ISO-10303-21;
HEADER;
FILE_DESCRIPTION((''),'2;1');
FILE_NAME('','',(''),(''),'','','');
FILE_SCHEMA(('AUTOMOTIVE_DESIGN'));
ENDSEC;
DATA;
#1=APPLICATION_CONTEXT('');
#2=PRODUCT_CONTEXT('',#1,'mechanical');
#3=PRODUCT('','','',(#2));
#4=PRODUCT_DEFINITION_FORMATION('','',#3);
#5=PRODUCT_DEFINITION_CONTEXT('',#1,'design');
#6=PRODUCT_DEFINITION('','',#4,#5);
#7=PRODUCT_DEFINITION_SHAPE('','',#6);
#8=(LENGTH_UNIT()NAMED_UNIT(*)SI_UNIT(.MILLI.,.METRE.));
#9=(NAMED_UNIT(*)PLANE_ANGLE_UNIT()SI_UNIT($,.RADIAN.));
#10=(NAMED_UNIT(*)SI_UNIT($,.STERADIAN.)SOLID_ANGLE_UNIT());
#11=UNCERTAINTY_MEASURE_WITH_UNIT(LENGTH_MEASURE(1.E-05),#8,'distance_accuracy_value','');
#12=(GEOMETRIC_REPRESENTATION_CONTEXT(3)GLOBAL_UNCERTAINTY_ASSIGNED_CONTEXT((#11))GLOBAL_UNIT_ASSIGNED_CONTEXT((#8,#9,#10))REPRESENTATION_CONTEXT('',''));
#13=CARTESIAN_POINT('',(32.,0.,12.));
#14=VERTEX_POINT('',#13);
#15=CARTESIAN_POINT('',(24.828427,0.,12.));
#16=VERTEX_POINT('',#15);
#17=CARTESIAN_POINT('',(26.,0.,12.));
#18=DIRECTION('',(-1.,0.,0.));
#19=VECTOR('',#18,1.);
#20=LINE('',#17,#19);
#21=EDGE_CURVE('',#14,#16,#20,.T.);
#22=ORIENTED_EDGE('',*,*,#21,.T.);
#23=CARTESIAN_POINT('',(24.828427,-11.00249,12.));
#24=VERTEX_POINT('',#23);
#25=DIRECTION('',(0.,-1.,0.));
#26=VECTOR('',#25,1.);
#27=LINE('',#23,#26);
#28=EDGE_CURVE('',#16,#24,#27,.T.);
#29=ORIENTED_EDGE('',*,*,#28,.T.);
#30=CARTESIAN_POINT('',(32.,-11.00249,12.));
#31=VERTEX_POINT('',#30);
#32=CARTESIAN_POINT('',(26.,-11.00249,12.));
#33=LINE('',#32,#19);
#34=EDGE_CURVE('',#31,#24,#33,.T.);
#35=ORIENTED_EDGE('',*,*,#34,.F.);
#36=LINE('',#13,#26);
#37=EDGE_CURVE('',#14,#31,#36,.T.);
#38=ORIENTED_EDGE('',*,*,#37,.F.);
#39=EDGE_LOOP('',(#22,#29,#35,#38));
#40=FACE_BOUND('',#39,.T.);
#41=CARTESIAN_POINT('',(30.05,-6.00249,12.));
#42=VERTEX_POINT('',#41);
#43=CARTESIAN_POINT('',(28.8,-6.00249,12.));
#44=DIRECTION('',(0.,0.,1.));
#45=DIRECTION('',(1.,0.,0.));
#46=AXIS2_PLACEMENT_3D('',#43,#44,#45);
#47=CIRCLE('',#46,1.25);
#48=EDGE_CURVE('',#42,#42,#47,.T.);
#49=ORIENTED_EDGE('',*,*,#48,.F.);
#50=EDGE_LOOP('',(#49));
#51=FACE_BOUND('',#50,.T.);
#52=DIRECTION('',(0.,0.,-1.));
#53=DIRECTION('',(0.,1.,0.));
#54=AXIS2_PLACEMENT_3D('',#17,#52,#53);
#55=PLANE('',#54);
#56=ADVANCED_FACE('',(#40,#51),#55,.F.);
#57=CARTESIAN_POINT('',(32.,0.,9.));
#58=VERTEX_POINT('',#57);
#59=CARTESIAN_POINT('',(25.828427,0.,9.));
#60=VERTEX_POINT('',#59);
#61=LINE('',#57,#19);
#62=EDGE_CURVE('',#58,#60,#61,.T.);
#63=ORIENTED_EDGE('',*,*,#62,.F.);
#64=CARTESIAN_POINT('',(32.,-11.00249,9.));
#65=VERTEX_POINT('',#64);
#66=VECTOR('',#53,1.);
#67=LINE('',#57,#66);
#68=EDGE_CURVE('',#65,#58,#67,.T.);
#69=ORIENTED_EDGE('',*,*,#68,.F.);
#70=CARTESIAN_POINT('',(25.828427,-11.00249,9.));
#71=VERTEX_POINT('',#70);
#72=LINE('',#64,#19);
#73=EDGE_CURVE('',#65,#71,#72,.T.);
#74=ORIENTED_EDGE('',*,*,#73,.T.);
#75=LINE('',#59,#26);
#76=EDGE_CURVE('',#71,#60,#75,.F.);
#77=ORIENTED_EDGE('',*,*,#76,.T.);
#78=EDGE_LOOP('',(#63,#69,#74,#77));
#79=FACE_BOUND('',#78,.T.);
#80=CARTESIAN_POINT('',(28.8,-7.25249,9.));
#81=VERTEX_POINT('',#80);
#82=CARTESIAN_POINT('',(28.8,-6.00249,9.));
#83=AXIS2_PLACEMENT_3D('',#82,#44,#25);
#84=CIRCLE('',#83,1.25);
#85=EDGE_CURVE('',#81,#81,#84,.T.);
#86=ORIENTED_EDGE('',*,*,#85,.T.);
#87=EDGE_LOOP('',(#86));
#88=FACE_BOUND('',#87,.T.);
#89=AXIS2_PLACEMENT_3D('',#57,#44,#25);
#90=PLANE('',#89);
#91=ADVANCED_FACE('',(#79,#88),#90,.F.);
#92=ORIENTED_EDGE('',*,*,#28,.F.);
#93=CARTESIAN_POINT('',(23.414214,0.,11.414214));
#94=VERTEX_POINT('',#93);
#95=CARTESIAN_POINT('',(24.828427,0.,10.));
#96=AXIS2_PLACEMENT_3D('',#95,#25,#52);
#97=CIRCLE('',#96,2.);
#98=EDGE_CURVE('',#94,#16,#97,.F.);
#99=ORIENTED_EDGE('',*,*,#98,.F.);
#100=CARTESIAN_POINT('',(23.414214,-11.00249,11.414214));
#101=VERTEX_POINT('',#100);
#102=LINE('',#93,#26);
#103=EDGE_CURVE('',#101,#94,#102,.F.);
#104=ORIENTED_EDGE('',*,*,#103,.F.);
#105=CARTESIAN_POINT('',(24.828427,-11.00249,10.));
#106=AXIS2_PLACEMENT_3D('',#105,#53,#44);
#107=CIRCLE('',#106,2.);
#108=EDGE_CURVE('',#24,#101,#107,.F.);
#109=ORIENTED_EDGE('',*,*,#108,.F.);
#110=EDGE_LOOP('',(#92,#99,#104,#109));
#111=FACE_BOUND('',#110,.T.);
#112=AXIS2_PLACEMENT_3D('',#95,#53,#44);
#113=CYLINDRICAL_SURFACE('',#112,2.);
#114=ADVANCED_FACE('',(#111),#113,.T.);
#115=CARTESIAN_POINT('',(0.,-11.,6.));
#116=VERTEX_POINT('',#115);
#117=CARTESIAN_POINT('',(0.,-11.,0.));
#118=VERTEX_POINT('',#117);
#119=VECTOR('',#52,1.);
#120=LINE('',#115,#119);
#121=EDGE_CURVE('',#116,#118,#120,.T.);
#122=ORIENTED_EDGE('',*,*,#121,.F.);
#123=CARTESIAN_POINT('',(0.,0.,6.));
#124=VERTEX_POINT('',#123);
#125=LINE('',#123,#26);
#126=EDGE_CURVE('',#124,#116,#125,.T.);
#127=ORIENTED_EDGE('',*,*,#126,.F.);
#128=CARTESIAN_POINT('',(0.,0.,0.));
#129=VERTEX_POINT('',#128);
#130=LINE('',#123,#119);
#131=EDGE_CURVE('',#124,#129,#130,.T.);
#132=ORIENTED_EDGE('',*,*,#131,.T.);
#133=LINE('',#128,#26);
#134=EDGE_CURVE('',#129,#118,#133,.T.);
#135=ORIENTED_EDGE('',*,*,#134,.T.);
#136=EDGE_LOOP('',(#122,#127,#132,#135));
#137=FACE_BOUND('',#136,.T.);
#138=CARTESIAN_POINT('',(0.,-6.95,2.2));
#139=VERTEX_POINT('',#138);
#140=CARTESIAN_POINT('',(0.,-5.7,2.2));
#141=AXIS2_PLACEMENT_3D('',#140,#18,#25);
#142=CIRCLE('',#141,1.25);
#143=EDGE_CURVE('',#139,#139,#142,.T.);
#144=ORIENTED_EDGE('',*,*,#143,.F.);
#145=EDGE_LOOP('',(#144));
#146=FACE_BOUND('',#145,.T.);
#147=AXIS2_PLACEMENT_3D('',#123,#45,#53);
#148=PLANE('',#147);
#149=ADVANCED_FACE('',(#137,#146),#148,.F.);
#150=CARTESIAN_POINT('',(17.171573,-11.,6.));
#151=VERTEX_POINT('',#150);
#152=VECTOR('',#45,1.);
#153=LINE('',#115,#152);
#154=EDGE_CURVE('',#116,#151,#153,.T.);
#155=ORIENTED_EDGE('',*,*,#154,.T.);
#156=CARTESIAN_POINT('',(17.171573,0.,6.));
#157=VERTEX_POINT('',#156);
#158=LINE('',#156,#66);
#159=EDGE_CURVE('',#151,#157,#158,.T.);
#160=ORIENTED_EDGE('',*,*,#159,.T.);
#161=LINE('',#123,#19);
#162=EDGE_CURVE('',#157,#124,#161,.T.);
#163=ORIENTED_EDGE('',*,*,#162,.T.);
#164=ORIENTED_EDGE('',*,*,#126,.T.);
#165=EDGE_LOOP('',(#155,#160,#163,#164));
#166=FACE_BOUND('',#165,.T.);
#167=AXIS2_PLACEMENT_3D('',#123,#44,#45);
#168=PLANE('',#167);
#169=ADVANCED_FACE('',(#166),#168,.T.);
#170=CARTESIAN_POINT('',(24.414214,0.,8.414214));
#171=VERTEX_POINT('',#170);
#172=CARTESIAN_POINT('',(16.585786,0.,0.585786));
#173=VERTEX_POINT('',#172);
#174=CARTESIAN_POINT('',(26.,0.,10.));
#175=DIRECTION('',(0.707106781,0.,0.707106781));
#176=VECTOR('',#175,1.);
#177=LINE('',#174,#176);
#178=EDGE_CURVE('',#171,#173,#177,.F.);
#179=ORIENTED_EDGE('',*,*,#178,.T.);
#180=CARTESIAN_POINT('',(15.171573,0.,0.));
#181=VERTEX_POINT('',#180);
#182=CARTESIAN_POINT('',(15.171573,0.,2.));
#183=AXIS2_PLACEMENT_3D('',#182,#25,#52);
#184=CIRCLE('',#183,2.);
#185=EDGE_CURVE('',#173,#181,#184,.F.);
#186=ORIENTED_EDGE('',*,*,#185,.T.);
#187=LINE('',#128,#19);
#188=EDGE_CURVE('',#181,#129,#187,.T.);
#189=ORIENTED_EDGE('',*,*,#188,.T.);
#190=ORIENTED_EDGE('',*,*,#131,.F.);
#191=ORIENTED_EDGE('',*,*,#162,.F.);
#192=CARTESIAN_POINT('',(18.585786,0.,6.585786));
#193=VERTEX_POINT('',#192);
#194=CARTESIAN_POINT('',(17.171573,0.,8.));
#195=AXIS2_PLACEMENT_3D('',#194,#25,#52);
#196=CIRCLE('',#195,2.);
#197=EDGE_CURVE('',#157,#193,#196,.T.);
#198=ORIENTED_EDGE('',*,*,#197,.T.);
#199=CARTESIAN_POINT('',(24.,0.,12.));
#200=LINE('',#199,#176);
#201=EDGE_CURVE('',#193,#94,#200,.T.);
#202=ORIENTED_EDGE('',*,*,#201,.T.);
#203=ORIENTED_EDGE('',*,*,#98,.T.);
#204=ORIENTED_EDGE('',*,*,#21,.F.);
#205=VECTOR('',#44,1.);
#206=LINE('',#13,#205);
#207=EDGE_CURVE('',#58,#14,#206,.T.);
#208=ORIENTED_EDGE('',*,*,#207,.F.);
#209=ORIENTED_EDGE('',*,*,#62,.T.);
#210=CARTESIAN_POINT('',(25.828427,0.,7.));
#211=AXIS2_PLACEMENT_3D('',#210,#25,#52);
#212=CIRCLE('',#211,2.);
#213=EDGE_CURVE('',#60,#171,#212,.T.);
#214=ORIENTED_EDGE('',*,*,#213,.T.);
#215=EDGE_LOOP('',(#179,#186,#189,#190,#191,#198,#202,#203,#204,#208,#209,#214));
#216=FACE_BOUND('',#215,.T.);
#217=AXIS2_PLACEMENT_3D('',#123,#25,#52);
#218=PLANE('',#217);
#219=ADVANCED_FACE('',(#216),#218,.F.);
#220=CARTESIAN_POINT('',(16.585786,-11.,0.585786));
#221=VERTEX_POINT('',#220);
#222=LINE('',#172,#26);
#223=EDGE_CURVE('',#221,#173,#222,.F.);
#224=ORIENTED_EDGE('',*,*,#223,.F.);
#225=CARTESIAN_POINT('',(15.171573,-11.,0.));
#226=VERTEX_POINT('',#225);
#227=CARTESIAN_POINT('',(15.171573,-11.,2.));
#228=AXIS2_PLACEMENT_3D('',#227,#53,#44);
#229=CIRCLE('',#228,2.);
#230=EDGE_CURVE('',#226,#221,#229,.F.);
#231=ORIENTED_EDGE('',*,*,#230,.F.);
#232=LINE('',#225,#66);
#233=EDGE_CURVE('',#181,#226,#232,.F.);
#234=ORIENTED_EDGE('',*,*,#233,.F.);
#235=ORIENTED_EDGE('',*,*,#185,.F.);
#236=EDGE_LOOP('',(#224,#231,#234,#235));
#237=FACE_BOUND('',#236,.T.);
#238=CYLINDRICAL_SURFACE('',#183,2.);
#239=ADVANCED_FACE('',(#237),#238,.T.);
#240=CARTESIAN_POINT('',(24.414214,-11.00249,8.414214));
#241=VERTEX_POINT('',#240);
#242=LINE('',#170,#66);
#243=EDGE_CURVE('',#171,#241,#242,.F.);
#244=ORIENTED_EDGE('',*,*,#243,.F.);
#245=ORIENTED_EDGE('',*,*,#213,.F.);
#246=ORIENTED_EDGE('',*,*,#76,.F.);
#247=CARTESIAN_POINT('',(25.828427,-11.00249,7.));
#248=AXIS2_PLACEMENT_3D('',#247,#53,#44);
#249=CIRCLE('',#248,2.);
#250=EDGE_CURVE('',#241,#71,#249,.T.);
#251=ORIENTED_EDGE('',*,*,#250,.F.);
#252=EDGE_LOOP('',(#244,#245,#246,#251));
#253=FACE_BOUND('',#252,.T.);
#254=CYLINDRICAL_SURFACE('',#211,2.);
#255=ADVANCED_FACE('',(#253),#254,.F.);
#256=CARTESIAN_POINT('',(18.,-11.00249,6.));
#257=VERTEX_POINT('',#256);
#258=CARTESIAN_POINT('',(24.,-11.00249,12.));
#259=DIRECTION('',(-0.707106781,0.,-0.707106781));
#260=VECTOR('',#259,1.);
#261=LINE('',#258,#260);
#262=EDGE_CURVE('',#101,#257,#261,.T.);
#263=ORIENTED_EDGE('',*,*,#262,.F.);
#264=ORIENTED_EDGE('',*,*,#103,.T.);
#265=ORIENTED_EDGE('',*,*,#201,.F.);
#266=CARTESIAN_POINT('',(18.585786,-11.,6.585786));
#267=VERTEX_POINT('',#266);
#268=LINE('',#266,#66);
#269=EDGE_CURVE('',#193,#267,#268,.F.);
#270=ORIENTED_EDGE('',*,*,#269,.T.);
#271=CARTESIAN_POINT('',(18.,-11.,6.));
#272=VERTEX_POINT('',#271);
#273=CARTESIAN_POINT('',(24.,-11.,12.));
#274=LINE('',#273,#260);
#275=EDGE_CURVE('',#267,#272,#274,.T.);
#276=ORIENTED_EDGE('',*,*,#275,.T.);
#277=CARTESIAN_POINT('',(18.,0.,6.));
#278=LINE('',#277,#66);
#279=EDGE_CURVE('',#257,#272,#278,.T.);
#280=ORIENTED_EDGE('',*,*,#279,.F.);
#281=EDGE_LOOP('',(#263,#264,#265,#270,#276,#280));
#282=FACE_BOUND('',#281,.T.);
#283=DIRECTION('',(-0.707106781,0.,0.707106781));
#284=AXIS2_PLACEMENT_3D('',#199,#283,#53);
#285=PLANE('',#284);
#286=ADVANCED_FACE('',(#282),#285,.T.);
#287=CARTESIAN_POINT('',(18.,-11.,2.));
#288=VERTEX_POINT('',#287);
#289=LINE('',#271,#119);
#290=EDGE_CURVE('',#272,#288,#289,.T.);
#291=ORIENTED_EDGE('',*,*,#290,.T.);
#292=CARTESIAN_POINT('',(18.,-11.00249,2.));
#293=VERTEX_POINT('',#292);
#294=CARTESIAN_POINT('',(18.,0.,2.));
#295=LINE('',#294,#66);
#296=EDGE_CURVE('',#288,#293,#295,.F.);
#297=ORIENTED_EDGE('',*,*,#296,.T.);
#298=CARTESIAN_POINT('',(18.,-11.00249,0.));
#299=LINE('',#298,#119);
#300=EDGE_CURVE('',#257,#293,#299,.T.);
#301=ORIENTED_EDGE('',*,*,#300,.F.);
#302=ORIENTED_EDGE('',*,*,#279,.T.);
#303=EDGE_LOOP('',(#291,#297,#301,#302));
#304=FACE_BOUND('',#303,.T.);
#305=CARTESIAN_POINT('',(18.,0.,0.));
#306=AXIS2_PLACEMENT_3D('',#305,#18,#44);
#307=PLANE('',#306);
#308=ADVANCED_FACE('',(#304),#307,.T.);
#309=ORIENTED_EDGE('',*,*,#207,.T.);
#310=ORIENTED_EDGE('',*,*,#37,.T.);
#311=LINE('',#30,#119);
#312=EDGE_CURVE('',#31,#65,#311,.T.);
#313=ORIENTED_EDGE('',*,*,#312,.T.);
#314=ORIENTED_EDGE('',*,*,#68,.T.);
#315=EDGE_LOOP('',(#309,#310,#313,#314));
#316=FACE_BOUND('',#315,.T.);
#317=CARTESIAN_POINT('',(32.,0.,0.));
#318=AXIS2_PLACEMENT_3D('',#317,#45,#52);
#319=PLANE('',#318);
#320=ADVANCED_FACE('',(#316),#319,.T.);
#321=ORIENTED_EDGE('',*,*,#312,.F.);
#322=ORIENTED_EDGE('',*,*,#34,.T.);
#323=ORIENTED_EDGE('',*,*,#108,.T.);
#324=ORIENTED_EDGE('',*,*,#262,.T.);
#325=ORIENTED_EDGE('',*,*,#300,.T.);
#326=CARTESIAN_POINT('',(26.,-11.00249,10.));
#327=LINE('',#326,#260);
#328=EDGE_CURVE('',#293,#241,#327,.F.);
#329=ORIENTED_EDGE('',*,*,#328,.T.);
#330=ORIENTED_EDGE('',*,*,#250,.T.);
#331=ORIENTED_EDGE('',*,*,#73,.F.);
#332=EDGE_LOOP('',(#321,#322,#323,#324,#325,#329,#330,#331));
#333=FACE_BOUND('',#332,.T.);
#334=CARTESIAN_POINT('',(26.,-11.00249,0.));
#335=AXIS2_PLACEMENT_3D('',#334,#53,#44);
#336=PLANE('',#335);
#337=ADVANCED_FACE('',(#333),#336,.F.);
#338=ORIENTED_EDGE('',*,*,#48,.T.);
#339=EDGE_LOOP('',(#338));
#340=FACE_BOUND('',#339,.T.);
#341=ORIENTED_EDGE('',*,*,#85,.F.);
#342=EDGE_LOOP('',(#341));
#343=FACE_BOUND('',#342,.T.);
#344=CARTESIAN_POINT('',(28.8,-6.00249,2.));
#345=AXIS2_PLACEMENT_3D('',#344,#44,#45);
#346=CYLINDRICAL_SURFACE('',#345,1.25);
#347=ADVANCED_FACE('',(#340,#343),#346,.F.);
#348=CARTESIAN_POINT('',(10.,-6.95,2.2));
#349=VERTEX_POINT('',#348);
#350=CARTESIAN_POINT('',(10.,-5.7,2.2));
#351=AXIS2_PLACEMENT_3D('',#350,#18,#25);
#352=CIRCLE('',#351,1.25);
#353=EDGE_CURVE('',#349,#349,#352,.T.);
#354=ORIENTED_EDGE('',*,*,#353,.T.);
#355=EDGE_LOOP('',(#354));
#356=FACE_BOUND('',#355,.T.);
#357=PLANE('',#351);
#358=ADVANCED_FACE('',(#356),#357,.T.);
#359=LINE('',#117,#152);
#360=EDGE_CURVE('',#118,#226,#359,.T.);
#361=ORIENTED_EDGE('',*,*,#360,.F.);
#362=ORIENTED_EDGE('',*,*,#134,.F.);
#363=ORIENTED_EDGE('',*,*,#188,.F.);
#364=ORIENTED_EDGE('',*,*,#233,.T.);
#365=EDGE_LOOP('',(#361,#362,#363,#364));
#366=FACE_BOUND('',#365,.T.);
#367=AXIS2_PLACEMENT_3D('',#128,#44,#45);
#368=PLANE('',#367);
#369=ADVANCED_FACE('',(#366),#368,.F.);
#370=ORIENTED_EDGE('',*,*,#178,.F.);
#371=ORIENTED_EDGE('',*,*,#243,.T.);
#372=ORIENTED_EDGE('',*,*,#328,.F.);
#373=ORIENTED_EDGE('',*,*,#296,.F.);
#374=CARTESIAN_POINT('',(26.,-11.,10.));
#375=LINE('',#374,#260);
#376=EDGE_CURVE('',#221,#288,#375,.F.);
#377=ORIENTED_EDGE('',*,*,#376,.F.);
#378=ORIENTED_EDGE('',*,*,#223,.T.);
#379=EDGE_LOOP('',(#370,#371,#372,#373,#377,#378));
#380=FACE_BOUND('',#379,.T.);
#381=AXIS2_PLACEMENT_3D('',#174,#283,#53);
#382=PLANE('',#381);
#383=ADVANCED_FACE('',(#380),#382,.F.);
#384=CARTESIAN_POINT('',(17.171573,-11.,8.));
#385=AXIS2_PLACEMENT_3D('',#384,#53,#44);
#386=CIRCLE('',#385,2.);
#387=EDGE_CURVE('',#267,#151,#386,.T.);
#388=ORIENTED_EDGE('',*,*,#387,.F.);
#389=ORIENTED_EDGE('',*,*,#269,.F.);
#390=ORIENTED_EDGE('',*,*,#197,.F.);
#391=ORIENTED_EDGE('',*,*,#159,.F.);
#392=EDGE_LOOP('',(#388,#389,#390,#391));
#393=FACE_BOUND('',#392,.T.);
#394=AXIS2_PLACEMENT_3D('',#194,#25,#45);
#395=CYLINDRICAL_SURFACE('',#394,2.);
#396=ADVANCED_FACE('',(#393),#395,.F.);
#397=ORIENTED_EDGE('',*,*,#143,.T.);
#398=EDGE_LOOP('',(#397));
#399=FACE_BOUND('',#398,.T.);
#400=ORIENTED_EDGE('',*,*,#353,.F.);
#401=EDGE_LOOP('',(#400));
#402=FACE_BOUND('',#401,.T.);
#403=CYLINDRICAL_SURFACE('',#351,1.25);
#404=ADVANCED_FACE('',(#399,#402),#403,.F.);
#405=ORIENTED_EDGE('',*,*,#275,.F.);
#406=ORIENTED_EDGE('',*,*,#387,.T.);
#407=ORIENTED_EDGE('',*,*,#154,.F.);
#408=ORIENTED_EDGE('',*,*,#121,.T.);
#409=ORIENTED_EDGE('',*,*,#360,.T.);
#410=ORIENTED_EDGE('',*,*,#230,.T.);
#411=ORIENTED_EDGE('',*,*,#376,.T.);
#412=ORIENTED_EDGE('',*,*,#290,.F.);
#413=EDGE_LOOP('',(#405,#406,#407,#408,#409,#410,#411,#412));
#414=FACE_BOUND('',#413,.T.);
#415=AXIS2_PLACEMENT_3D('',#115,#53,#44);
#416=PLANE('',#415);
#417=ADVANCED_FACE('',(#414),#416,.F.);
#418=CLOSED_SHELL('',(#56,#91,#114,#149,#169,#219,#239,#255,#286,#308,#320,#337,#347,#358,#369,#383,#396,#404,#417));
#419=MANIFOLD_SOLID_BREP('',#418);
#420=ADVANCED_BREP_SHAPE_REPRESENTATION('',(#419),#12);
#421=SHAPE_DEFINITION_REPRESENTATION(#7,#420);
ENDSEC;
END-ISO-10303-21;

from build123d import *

# Parameters (mm, degrees)
CROQUIS1_W              = 18
CROQUIS1_H              = 11
SALIENTE_EXTRUIR1_DEPTH = 6
CROQUIS3_W              = 12
CROQUIS3_H              = 11.002490455
SALIENTE_EXTRUIR2_DEPTH = 8
CROQUIS4_W              = 3
CROQUIS4_H              = 11.002490455
SALIENTE_EXTRUIR3_DEPTH = 6
CROQUIS5_R              = 1.25
CORTAR_EXTRUIR1_DEPTH   = 10
CROQUIS6_R              = 1.25
CORTAR_EXTRUIR2_DEPTH   = 10
CHAFL_N1_SIZE           = 10
CHAFL_N2_SIZE           = 6
REDONDEO1_R             = 2


with BuildPart() as part:
    # Croquis1 → Saliente-Extruir1 (new body)
    with BuildSketch(Plane.XY):
        with Locations((9, -5.5)):
            Rectangle(CROQUIS1_W, CROQUIS1_H)
    extrude(amount=SALIENTE_EXTRUIR1_DEPTH)

    # Croquis3 → Saliente-Extruir2 (add)
    with BuildSketch(Plane(origin=(18, 0, 0), x_dir=(0, 0, -1), z_dir=(1, 0, 0))):
        with Locations((-6, -5.501245228)):
            Rectangle(CROQUIS3_W, CROQUIS3_H)
    extrude(amount=SALIENTE_EXTRUIR2_DEPTH)

    # Croquis4 → Saliente-Extruir3 (add)
    with BuildSketch(Plane(origin=(26, 0, 0), x_dir=(0, 0, -1), z_dir=(1, 0, 0))):
        with Locations((-10.5, -5.501245228)):
            Rectangle(CROQUIS4_W, CROQUIS4_H)
    extrude(amount=SALIENTE_EXTRUIR3_DEPTH)

    # Croquis5 → Cortar-Extruir1 (cut)
    with BuildSketch(Plane.ZY):
        with Locations(Location((2.2, -5.7, 0), (0, 0, 270))):
            Circle(CROQUIS5_R)
    extrude(amount=-CORTAR_EXTRUIR1_DEPTH, mode=Mode.SUBTRACT)

    # Croquis6 → Cortar-Extruir2 (cut)
    with BuildSketch(Plane.XY.offset(12)):
        with Locations((28.8, -6.002490455)):
            Circle(CROQUIS6_R)
    extrude(amount=-CORTAR_EXTRUIR2_DEPTH, mode=Mode.SUBTRACT)

    # Chaflán1
    # the kernel refuses this chamfer: 10 mm, written as the material it takes off along each edge
    with BuildSketch(Plane(origin=(26, -36.719320335, 0), x_dir=(0, 0, 1), z_dir=(0, 1, 0))) as chafl_n1_piece_1_section:
        Polygon((CHAFL_N1_SIZE, 0), (0, -CHAFL_N1_SIZE), (0, 0), align=None)
    chafl_n1_piece_1 = extrude(amount=62.436150214, mode=Mode.PRIVATE)
    chafl_n1_piece_1 = split(chafl_n1_piece_1, bisect_by=Plane(origin=(26, -36.719320335, 9), z_dir=(0, 0, -1)), keep=Keep.TOP, mode=Mode.PRIVATE)
    add(chafl_n1_piece_1, mode=Mode.SUBTRACT)

    # Chaflán2
    chafl_n2_edges = [part.edges().sort_by_distance(p)[0] for p in [
        (18, -5.501245227, 12),
    ]]
    chamfer(chafl_n2_edges, length=CHAFL_N2_SIZE)

    # Redondeo1
    redondeo1_edges = [part.edges().sort_by_distance(p)[0] for p in [
        (18, -5.5, 6),
        (16, -5.5, 0),
        (25, -5.501245227, 9),
        (24, -5.501245227, 12),
    ]]
    fillet(redondeo1_edges, radius=REDONDEO1_R)


solid = part.part
